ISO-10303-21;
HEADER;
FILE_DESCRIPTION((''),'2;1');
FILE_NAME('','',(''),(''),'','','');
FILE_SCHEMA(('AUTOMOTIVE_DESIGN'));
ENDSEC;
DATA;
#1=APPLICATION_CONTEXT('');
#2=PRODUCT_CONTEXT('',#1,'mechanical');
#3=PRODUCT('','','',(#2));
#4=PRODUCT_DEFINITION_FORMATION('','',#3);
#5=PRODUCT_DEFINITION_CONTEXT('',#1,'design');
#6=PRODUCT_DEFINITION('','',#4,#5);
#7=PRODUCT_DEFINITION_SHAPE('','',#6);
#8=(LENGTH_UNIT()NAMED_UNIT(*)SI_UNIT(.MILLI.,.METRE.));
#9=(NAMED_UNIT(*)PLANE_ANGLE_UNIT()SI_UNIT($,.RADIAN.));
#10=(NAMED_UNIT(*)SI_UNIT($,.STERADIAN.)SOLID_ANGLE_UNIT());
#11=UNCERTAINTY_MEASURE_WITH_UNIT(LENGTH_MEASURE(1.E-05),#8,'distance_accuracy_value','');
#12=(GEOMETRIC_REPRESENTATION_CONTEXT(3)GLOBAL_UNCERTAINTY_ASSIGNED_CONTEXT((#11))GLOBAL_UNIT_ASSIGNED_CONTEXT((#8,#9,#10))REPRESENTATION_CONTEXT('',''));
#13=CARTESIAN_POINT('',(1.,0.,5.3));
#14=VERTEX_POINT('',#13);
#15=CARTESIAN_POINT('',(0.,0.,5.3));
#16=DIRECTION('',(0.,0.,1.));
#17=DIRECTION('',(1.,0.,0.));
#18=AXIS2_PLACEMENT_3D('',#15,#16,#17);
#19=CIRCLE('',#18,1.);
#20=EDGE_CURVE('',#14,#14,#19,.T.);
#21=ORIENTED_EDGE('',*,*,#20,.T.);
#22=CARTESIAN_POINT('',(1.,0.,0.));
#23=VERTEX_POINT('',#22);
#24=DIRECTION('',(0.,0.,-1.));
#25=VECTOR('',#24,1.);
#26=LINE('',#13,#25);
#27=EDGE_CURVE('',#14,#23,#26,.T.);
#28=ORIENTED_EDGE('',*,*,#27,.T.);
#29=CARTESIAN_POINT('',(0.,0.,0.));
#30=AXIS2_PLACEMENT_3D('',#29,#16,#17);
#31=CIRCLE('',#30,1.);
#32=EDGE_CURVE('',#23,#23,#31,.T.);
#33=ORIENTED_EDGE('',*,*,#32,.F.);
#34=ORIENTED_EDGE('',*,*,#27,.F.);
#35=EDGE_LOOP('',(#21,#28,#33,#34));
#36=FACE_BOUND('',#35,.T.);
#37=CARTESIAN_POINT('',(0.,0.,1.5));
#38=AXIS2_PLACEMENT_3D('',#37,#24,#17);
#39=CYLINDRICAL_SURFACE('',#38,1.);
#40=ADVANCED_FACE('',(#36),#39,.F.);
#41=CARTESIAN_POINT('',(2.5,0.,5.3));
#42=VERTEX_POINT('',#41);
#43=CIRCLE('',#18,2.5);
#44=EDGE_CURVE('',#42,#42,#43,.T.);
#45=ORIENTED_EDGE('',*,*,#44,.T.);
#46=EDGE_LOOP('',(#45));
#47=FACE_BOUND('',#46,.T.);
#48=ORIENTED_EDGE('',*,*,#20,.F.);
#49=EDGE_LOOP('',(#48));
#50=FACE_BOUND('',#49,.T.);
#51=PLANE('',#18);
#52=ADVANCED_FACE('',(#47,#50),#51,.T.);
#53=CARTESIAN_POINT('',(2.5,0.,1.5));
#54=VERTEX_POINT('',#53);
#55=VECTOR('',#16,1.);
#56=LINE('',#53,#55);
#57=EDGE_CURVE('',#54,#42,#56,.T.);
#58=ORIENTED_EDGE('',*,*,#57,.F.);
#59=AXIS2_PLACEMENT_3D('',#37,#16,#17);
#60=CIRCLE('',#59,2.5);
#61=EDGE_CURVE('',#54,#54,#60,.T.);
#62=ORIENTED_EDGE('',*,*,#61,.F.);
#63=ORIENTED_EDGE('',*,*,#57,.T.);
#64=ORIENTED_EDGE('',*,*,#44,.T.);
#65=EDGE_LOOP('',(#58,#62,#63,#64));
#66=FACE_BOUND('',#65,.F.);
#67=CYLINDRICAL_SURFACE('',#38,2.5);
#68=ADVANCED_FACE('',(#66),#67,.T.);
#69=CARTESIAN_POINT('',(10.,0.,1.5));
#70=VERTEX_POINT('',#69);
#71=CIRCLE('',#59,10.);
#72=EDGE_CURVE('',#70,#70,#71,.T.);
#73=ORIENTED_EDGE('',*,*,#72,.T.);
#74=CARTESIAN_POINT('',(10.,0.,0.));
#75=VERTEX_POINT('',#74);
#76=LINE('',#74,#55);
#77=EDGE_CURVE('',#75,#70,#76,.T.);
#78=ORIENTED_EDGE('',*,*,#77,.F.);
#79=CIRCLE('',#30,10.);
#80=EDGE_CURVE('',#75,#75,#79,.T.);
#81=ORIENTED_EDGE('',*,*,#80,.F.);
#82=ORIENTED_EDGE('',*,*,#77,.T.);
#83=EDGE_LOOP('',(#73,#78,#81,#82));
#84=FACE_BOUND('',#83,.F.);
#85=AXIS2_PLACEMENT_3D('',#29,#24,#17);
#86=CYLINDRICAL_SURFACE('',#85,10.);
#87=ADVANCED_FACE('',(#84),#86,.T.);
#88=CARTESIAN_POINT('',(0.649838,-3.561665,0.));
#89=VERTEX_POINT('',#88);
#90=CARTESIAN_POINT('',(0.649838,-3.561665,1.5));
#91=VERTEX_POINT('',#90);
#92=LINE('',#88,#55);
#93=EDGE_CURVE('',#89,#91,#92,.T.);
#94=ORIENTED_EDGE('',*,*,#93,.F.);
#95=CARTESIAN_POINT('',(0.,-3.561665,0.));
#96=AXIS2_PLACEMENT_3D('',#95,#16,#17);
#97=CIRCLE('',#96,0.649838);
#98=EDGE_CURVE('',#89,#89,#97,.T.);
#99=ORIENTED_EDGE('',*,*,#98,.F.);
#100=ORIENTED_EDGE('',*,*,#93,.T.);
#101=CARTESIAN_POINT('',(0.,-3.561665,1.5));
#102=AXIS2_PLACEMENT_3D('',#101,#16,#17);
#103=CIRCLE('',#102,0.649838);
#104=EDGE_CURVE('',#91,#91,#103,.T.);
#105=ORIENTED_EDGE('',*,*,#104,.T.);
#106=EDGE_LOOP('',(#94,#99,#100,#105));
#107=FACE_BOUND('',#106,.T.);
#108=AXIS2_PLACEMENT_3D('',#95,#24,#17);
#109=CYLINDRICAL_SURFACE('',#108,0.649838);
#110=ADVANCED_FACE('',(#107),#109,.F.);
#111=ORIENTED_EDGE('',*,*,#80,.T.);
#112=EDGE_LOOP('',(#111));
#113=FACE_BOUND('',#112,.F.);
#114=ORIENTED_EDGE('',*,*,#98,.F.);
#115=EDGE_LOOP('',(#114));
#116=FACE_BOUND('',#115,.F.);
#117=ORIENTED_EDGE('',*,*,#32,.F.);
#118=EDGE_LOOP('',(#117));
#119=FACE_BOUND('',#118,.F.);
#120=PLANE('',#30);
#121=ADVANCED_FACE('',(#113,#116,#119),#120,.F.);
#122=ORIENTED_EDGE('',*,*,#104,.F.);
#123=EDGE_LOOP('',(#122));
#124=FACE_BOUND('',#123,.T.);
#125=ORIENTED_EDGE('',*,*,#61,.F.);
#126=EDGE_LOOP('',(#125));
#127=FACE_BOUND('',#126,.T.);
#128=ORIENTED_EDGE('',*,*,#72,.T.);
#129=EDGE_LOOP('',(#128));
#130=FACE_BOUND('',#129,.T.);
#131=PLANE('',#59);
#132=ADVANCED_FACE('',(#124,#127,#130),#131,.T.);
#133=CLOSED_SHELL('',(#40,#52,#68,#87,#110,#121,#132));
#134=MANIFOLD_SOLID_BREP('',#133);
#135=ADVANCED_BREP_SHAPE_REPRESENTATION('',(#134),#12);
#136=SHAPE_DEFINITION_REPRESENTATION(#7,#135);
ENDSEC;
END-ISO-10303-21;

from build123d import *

# Parameters (mm, degrees)
F0_R     = 10
F0_R_2   = 1
F1_DEPTH = 1.5
F2_R     = 2.5
F2_R_2   = 1
F3_DEPTH = 3.8
F4_R     = 0.6498381819
F5_DEPTH = 1.5


# Not quite as in the source:
# - a feature names something its author has since deleted; it is built from what else it names


with BuildPart() as f1:
    # F0 (on Top) → F1 (new body)
    with BuildSketch(Plane.XY):
        Circle(F0_R)
        Circle(F0_R_2, mode=Mode.SUBTRACT)
    extrude(amount=F1_DEPTH)

    # F2 (on face) → F3 (join)
    with BuildSketch(Plane.XY.offset(1.5)):
        Circle(F2_R)
        Circle(F2_R_2, mode=Mode.SUBTRACT)
    extrude(amount=F3_DEPTH)

    # F4 (on Top) → F5 (cut, through all)
    with BuildSketch(Plane.XY):
        with Locations((0, -3.5616646055)):
            Circle(F4_R)
    extrude(amount=F5_DEPTH, mode=Mode.SUBTRACT)


solid = f1.part
